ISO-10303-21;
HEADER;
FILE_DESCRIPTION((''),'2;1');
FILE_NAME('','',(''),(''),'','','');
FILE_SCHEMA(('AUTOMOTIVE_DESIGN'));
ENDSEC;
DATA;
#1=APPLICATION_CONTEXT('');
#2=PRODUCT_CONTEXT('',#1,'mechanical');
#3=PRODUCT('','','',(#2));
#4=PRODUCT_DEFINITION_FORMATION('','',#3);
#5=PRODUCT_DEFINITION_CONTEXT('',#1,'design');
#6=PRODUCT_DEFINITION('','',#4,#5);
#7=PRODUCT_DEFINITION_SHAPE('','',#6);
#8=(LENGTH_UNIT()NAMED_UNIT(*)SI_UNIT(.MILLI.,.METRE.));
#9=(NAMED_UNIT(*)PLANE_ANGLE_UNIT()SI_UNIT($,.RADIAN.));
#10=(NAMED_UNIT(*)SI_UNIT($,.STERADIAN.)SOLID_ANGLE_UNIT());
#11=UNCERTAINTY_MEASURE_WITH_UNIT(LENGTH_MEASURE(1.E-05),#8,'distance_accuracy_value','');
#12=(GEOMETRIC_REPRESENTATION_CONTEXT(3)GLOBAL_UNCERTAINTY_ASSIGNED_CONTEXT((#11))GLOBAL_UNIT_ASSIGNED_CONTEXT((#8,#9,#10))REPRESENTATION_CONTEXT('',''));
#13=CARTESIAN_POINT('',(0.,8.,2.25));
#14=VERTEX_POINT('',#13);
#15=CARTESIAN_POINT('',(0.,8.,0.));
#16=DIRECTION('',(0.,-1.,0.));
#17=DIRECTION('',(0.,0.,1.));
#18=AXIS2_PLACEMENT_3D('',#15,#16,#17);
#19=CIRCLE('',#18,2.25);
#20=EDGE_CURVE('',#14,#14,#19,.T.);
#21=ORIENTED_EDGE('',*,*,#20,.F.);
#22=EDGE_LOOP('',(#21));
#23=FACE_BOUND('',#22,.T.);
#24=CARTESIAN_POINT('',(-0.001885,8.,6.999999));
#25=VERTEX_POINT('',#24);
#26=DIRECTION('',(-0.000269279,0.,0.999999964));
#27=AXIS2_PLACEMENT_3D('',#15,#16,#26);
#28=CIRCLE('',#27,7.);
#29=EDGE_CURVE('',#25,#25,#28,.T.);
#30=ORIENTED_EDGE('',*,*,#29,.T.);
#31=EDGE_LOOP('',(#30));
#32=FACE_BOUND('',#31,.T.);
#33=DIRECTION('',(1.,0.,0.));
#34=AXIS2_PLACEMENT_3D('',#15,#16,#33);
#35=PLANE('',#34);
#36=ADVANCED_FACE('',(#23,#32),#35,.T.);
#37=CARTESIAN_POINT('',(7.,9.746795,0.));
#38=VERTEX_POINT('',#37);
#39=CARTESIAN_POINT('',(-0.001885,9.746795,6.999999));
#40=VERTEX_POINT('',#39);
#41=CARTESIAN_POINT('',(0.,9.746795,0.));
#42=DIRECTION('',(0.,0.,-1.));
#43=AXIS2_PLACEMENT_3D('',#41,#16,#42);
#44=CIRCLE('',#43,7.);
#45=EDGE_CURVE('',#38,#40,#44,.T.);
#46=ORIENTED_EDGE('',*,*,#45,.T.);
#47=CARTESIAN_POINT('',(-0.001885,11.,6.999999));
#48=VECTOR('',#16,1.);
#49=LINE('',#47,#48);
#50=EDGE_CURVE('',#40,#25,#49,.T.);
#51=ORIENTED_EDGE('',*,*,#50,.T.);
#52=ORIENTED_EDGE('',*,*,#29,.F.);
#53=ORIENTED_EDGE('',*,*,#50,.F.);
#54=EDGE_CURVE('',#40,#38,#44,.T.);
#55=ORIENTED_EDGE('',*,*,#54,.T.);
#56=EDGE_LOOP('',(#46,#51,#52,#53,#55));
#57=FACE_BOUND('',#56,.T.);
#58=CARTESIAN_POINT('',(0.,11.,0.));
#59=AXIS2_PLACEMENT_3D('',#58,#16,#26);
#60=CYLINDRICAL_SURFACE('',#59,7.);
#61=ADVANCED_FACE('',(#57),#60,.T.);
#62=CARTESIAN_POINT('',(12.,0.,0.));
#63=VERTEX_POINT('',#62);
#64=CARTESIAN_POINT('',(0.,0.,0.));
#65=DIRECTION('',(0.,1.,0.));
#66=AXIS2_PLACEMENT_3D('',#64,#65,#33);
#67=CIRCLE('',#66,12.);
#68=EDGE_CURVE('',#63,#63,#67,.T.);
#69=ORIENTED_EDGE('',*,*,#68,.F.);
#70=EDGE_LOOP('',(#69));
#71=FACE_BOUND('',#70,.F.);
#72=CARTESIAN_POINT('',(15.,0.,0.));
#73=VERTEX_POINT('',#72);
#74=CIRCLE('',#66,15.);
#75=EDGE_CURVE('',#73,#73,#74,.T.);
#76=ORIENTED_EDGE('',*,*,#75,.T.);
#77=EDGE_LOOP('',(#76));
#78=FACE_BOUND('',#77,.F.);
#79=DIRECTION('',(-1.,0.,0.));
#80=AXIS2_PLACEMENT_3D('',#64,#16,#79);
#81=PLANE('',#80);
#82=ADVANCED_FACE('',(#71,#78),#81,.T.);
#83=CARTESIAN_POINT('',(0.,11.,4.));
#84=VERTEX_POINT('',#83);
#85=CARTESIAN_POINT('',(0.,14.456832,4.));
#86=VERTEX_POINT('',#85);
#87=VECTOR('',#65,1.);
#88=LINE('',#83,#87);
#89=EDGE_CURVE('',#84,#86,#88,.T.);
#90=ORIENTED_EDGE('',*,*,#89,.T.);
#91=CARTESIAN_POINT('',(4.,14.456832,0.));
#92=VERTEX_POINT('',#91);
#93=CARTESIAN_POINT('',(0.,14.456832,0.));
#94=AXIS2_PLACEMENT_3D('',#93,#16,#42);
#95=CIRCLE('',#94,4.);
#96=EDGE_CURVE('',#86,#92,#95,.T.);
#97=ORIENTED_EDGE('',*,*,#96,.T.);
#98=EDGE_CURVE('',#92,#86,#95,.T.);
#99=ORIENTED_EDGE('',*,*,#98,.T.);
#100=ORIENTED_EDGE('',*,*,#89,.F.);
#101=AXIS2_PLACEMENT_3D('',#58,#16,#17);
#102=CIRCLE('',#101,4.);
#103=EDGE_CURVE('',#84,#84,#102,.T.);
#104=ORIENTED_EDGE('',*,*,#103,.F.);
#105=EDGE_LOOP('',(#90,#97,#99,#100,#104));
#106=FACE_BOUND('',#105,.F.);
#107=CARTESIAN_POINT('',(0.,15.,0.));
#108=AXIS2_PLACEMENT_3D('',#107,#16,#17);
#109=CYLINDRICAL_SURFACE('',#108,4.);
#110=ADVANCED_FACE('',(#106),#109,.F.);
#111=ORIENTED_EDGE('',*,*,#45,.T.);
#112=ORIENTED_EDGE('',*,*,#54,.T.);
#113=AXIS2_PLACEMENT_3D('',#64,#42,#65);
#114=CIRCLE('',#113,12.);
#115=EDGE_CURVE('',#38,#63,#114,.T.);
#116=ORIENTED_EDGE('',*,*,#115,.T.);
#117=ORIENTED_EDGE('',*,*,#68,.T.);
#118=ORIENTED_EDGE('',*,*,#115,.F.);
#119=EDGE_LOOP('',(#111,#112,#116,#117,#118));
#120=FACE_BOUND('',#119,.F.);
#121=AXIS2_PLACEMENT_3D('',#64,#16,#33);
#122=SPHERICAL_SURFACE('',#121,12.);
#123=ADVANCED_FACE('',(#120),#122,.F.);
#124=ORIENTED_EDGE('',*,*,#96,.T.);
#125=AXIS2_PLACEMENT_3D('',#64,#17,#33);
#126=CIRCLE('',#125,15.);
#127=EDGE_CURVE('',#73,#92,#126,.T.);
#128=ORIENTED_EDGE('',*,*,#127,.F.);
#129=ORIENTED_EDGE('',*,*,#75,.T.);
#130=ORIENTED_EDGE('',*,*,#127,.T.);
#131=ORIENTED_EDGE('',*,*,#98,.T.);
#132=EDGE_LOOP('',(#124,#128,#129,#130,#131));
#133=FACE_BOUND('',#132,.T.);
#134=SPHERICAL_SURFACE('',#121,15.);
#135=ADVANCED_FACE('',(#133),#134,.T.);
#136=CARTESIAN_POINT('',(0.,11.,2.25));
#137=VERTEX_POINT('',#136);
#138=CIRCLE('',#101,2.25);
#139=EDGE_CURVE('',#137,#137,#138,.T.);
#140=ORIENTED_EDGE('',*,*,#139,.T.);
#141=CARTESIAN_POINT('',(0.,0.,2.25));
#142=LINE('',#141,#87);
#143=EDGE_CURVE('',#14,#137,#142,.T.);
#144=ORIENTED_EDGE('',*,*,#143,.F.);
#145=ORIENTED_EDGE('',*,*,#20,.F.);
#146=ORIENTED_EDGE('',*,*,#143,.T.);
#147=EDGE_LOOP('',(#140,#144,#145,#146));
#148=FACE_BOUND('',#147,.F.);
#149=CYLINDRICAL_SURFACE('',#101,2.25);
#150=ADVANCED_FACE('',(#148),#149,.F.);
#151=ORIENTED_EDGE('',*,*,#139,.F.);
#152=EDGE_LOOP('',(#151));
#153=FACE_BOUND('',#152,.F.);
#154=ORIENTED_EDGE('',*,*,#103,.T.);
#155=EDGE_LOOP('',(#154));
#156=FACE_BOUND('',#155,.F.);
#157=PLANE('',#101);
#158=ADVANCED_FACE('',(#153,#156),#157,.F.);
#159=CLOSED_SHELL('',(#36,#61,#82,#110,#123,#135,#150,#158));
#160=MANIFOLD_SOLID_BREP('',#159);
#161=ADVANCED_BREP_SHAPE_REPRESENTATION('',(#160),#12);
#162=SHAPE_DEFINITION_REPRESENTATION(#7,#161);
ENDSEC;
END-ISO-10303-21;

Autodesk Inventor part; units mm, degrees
ref_plane "YZ Plane" through (0, 0, 0) normal (1, 0, 0) x (0, 1, 0)
ref_plane "XY Plane" through (0, 0, 0) normal (0, 0, 1) x (1, 0, 0)
sketch "Sketch1" plane through (0, 0, 0) normal (0, 0, 1) x (1, 0, 0)
  line L0 (0, 0) -> (0, 15)
  line L1 (0, 0) -> (15, 0)
  arc A0 (15, 0) -> (0, 15) centre (0, 0) ccw
  line L2 (0, -3.621321) -> (0, 21.727922)
  dimension "d2" = 15
sketch "Sketch1 outline for Revolution1" plane through (0, 0, 0) normal (0, 0, 1) x (1, 0, 0)
  line L0 (0, 0) -> (0, 15)
  arc A0 (0, 15) -> (15, 0) centre (0, 0) cw
  line L1 (15, 0) -> (0, 0)
revolve "Revolution1" add sketch "Sketch1 outline for Revolution1" angle 360 about axis through (0, -10, 0) along (0, 1, 0)
ref_plane "Work Plane1" through (0, 15, 0) normal (0, 1, 0) x (-1, 0, 0)
sketch "Sketch2" plane through (0, 15, 0) normal (0, 1, 0) x (-1, 0, 0)
  point P0 (0, 0)
  point P1 (0, 0)
hole "Hole1" at (0, 15, 0) direction (0, -1, 0) diameter 4.5 end through all counterbore diameter 8 counterbore depth 4 clearance for "Socket Head Cap Screw" size "M4" standard "Ansi Metric M Profile"
shell "Shell1" thickness 3 removed faces 1 at (10.599241, 0, 1.286981)
sketch "Sketch3" plane through (0, 0, 0) normal (0, -1, 0) x (1, 0, 0)
  circle A0 centre (0, 0) radius 5.25 projected
  circle A1 centre (0, 0) radius 2.25 projected
sketch "Sketch3 outline for Extrusion1" plane through (0, 0, 0) normal (0, -1, 0) x (1, 0, 0)
  circle A0 centre (0, 0) radius 5.25
  circle A1 centre (0, 0) radius 2.25
extrude "Extrusion1" cut sketch "Sketch3 outline for Extrusion1" against normal blind 8
properties part number "Ball_Upper Half" material "Nylon 6/6"
